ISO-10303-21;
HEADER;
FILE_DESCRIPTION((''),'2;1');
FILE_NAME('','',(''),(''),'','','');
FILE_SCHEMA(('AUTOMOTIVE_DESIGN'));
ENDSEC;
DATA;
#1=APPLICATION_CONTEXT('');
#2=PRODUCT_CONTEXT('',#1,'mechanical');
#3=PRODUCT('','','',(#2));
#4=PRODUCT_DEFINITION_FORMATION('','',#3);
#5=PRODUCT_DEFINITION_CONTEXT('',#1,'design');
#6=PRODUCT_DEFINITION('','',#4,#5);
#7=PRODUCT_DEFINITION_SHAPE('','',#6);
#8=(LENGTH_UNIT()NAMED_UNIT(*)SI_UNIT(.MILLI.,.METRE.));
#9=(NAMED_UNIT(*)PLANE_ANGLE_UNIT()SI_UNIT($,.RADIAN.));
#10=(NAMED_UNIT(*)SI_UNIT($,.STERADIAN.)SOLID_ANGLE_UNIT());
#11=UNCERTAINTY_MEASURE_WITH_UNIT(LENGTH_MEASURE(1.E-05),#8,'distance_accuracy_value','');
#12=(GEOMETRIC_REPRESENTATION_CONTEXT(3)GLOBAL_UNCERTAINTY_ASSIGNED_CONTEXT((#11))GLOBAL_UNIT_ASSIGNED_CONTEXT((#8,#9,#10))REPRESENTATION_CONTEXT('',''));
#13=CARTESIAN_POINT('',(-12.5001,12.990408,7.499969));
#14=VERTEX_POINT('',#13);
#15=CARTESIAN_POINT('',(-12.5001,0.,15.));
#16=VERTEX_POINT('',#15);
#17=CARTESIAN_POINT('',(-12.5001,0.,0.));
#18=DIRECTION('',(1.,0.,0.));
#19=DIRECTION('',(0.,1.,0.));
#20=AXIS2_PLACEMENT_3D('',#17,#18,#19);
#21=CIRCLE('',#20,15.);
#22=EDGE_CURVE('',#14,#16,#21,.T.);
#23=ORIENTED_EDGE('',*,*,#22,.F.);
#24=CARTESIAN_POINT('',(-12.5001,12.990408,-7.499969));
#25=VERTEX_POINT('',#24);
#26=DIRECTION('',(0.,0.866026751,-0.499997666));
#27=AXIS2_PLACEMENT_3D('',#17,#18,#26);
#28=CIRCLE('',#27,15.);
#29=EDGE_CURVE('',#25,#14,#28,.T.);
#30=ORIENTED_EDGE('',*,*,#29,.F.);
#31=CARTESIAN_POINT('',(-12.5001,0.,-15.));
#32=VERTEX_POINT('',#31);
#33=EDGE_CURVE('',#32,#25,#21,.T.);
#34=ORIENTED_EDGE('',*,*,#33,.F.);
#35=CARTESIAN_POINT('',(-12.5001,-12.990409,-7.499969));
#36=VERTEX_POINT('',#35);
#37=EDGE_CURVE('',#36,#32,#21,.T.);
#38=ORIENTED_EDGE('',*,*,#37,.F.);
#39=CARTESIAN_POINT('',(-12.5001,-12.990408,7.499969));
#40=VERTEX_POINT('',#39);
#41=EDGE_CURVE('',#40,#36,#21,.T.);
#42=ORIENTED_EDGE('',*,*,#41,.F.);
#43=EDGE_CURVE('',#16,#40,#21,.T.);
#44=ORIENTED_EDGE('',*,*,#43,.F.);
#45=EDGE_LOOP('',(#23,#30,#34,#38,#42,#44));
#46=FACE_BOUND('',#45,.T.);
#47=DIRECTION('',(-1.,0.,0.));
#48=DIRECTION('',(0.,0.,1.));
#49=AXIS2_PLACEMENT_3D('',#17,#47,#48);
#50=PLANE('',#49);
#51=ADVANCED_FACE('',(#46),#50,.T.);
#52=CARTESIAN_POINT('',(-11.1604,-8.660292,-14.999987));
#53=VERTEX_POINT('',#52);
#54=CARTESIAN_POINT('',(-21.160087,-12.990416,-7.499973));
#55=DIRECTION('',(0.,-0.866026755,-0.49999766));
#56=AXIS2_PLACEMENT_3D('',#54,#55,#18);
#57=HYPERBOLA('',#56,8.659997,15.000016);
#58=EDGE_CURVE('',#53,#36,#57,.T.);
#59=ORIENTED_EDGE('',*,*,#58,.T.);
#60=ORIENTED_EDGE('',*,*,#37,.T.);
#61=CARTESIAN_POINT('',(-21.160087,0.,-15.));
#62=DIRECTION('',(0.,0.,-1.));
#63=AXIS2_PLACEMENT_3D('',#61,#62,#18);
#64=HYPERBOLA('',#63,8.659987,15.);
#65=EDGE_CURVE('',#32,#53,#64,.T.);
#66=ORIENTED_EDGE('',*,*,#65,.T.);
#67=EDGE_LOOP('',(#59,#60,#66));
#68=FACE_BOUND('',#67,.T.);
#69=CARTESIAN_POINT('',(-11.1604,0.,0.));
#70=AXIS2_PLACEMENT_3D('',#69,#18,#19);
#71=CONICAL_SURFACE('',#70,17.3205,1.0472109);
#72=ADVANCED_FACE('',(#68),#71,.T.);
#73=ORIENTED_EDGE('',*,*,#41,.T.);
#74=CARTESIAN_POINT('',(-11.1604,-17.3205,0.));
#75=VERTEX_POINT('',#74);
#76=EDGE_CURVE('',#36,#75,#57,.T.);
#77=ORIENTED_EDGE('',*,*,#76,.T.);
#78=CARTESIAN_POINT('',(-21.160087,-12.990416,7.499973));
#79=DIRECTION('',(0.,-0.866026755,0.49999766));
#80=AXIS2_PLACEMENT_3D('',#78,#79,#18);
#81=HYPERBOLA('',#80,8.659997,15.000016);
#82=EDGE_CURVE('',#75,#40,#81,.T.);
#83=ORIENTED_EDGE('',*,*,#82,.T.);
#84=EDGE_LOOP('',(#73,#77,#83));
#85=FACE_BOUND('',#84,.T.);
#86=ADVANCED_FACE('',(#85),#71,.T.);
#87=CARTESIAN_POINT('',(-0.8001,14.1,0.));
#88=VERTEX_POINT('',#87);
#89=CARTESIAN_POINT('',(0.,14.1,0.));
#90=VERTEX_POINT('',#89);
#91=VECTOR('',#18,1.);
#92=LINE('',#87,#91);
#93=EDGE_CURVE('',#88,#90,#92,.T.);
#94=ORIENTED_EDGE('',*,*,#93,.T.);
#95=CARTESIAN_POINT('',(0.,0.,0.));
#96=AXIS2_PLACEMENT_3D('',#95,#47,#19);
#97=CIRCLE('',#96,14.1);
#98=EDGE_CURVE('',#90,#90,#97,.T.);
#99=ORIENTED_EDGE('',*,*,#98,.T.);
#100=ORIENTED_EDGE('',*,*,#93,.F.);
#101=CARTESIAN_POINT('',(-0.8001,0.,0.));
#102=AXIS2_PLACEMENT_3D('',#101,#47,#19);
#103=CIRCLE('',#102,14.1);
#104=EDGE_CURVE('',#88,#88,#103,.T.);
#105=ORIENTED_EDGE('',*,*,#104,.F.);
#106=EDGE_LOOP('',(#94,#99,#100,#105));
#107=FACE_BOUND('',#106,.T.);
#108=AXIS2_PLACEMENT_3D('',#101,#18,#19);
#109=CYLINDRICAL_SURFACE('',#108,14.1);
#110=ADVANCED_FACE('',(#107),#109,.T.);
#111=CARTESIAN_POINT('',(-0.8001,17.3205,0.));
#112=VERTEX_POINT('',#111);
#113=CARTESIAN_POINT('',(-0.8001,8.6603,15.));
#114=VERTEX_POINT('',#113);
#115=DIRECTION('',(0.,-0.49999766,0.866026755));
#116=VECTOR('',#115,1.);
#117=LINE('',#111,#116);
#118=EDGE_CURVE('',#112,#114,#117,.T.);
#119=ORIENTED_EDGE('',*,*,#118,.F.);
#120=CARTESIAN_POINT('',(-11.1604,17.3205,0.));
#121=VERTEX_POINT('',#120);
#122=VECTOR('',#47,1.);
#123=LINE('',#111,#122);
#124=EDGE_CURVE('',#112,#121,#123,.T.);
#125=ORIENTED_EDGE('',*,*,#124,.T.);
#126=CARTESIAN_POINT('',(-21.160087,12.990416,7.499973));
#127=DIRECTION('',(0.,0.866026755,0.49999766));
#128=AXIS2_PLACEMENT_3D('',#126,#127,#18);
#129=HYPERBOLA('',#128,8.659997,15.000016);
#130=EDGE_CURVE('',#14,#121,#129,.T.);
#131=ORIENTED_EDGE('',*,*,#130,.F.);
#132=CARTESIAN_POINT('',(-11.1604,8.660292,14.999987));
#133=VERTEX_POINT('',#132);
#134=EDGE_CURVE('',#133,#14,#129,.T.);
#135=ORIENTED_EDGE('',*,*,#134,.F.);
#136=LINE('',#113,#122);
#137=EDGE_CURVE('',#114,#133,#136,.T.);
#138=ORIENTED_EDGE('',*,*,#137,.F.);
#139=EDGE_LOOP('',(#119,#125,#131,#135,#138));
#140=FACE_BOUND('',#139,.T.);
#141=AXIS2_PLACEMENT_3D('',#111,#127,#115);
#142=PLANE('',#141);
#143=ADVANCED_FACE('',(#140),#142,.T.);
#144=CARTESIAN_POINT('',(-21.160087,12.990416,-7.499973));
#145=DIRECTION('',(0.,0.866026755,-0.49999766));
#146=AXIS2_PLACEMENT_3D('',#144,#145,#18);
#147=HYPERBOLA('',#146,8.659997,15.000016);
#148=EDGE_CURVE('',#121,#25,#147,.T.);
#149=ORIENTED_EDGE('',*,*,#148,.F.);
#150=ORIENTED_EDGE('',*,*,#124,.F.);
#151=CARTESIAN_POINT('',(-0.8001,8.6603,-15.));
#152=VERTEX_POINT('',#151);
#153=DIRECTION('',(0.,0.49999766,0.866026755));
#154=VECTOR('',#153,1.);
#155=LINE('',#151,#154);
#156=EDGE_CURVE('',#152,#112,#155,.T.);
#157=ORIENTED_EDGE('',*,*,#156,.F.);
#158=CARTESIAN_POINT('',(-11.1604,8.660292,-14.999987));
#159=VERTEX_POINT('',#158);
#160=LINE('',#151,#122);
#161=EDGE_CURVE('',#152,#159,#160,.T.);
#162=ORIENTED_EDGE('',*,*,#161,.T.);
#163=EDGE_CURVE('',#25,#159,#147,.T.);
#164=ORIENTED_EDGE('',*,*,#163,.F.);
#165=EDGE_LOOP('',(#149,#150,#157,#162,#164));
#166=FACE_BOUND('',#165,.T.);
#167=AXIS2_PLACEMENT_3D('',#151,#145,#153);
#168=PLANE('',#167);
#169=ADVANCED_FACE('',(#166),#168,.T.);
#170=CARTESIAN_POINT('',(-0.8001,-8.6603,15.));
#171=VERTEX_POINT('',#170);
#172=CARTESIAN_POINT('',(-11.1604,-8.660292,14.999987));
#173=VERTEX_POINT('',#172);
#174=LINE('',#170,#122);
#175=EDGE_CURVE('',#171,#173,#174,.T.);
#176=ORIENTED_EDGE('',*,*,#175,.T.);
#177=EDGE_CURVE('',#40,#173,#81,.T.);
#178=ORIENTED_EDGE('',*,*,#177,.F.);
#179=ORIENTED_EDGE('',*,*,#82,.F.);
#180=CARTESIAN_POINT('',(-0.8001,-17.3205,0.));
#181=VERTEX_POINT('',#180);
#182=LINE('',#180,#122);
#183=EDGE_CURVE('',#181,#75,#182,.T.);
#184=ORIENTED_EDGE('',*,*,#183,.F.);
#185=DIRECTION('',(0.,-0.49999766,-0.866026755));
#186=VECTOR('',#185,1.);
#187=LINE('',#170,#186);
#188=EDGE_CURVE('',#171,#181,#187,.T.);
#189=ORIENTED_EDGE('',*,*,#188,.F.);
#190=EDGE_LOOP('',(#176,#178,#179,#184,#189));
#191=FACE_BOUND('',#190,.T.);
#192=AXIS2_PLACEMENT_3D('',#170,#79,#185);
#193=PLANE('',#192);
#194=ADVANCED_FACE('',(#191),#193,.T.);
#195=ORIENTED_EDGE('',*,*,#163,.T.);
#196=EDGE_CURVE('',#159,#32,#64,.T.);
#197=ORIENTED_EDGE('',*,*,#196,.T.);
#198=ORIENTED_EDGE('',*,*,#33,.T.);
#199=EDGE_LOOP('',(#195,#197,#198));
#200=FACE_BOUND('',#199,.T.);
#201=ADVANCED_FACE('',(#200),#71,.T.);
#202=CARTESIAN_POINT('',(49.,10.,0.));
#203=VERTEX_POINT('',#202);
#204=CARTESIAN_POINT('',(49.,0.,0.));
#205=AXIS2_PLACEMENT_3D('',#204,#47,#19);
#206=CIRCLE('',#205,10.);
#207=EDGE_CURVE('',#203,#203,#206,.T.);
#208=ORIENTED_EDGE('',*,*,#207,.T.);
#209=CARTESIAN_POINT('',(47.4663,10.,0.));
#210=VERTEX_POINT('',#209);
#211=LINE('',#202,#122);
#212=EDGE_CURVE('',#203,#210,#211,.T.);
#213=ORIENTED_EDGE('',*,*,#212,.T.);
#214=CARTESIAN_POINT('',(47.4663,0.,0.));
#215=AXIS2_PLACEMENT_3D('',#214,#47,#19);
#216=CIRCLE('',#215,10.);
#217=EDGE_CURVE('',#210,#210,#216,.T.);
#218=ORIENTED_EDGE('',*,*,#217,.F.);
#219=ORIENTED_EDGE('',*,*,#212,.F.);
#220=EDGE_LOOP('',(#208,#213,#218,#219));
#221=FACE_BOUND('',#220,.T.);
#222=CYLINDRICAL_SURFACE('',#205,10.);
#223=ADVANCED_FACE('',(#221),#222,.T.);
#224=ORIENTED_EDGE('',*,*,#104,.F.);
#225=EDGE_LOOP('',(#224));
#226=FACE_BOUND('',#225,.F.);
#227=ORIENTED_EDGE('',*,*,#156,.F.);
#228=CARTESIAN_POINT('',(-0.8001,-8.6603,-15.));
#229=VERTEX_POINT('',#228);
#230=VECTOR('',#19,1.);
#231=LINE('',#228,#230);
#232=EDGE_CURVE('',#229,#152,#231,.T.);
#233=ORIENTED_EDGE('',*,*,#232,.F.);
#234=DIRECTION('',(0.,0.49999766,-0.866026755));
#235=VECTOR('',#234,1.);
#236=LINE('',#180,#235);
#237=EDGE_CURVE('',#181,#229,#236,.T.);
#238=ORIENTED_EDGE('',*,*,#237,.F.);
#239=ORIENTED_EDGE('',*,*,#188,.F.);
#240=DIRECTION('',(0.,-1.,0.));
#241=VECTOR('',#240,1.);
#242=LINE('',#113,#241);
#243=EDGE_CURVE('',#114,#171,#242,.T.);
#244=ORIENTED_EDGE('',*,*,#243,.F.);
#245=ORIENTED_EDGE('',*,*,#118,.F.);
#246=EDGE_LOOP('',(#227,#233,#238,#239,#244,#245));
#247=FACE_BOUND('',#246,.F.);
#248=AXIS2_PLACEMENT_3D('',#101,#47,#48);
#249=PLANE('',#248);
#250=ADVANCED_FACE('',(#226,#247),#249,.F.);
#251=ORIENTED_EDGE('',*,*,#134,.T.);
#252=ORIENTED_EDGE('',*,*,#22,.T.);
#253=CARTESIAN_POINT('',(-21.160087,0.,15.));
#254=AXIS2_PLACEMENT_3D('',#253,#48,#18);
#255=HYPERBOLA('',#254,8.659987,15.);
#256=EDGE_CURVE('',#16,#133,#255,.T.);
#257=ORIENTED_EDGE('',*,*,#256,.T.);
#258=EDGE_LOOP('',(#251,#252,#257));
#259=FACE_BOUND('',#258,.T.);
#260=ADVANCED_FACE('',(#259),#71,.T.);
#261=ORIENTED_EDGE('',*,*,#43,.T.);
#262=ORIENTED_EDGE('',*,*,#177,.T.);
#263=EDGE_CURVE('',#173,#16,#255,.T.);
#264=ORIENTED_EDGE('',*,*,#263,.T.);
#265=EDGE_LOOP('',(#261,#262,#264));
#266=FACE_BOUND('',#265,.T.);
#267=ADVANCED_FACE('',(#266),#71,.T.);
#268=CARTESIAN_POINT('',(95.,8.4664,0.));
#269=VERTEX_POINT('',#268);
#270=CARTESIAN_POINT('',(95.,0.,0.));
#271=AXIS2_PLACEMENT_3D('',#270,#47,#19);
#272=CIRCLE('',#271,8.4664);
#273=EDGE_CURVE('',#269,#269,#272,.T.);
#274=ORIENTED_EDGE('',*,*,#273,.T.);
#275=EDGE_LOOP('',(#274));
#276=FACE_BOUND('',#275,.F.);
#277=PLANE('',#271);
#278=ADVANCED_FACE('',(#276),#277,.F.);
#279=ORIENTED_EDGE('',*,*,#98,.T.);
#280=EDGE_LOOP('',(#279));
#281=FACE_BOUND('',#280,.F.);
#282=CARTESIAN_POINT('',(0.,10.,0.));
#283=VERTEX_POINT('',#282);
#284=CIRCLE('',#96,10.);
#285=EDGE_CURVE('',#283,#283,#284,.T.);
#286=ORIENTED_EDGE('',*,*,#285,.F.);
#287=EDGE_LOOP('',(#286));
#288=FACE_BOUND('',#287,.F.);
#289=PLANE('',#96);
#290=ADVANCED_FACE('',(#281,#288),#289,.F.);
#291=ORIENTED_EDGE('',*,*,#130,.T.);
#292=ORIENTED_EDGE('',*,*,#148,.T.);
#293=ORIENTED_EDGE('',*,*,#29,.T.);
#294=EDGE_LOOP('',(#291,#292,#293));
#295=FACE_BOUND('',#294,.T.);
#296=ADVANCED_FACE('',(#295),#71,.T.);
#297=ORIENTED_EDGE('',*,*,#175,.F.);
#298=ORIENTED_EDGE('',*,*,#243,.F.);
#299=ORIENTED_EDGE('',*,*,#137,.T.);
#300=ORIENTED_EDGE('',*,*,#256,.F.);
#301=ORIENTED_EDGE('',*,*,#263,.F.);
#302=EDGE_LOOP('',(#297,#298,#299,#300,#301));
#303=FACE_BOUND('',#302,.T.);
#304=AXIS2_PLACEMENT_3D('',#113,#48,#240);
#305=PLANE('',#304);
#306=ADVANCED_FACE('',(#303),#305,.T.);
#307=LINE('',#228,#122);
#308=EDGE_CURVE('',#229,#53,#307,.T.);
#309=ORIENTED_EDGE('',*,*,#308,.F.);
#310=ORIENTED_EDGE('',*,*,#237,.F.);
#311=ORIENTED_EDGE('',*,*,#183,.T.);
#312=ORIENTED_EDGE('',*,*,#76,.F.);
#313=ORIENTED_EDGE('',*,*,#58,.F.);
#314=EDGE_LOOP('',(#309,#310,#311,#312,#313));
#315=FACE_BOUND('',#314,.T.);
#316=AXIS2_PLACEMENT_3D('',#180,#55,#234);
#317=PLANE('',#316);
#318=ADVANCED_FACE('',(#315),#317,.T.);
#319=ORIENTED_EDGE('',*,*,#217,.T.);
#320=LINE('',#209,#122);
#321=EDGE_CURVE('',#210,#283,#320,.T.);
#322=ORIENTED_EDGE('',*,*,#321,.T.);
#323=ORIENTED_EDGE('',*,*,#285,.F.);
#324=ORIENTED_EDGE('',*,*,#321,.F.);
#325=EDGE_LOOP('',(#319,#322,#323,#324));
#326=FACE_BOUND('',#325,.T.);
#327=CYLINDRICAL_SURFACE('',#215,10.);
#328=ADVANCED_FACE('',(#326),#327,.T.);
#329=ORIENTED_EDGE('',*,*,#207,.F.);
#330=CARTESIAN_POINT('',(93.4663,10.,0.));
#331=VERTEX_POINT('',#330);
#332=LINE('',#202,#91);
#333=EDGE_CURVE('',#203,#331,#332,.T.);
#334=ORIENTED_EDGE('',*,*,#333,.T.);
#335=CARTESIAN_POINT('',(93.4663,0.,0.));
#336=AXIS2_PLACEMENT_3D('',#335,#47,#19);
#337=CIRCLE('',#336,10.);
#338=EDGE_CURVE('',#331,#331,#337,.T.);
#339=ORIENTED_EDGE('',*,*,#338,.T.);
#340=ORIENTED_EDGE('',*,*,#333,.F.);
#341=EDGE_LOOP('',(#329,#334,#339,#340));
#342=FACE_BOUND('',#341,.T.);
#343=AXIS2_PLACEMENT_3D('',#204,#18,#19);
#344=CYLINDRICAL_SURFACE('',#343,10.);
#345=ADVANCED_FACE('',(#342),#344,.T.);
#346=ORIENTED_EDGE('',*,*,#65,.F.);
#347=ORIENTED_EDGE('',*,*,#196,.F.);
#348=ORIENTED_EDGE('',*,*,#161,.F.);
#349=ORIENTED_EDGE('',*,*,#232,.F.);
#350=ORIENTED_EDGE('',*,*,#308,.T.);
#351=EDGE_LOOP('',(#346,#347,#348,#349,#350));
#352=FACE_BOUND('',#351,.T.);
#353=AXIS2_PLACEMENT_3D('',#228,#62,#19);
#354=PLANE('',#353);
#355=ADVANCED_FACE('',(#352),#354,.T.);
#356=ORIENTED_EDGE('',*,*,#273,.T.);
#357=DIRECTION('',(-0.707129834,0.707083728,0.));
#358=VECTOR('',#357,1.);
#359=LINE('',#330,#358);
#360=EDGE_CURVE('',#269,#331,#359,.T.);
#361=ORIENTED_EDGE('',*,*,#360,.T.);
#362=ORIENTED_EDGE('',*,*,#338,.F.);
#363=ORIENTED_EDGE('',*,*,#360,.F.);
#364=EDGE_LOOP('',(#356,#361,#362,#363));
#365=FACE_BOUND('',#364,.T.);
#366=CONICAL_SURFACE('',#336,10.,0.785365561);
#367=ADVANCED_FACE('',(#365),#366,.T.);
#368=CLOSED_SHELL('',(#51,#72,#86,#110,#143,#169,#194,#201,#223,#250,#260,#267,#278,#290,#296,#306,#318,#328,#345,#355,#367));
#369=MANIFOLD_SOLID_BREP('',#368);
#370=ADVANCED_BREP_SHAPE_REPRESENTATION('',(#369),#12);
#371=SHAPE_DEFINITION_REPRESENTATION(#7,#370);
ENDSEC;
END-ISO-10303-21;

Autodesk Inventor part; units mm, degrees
ref_plane "YZ Plane" through (0, 0, 0) normal (1, 0, 0) x (0, 1, 0)
ref_plane "XZ Plane" through (0, 0, 0) normal (0, 1, 0) x (-1, 0, 0)
sketch "Sketch1" plane through (0, 0, 0) normal (0, 0, 1) x (1, 0, 0)
  line L0 (0, 14.1) -> (0, 10)
  line L1 (49, 10) -> (95, 10)
  line L2 (95, 10) -> (95, 0)
  line L3 (95, 0) -> (-0.8001, 0)
  line L4 (-19.9601, 0) -> (114.16, 0) projected
  line L5 (-0.8001, 0) -> (-0.8001, 14.1)
  line L6 (-0.8001, 14.1) -> (0, 14.1)
  line L7 (49, 10) -> (47.4663, 10)
  line L8 (47.4663, 10) -> (0, 10)
  line L9 (0, -2.82) -> (0, 16.92) projected
  dimension "d0" = 95
  dimension "d1" = 46
  dimension "d2" = 20
  dimension "d9" = 0.8001
  dimension "d10" = 28.2
  dimension "d13" = 1.5337
  dimension "d14" = 20
revolve "Body" add sketch "Sketch1" angle 360 about axis through (95, 0, 0) along (-1, 0, 0)
sketch "Sketch2" plane through (-0.8001, 0, 0) normal (-1, 0, 0) x (0, 0, 1)
  line L0 (0, 17.3205) -> (15, 8.6603)
  line L1 (15, 8.6603) -> (15, -8.6603)
  line L2 (15, -8.6603) -> (0, -17.3205)
  line L3 (0, -17.3205) -> (-15, -8.6603)
  line L4 (-15, -8.6603) -> (-15, 8.6603)
  line L5 (-15, 8.6603) -> (0, 17.3205)
  point P0 (0, 0)
  point P1 (0, 0)
  dimension "d11" = 30
extrude "Head" add sketch "Sketch2" along normal blind 11.7
sketch "Sketch4" plane through (0, 0, 0) normal (0, 0, 1) x (1, 0, 0)
  line L0 (-12.5001, 15) -> (-12.5001, 17.3205)
  line L1 (-12.5001, 17.3205) -> (-11.1604, 17.3205)
  line L2 (-11.1604, 17.3205) -> (-12.5001, 15)
  line L3 (-14.8401, 0) -> (1.5399, 0) projected
  line L4 (-0.8001, 17.3205) -> (-12.5001, 17.3205) projected
  line L5 (-12.5001, 8.6603) -> (-12.5001, 17.3205) projected
  dimension "d5" = 30
  dimension "d19" = 30
revolve "Chamfer1" cut sketch "Sketch4" angle 360 about axis through (-10, 0, 0) along (1, 0, 0)
thread "Thread" size "M20x2.5" class "6g" standard "ISO Metric profile" length 46
chamfer "Chamfer2" distance 1.5336 distance2 1.5337 1 edges at (95, -10, 0) measured on face at (95, -2.495, 2.2104)
ref_plane "Work Plane1" through (1.525, 0, 0) normal (0, 0, 1) x (1, 0, 0)
equation "\"d0\" = NLG"
equation "\"d1\" = GEL"
equation "\"d2\" = GD"
equation "\"d10\" = SD2"
equation "\"d14\" = BDM"
equation "\"d11\" = SW"
equation "\"d3\" = KOH - SD"
equation "\"d5\" = ANG1"
equation "\"d19\" = SW0"
equation "\"d15\" = GEL"
equation "\"d6\" = -0.5 * SPD + 0.5 * GD"
equation "\"NLG\" = 95"
equation "\"GD\" = NND"
equation "\"BDM\" = NND"
equation "\"KOH\" = 12.5"
equation "\"GEL\" = 46"
equation "\"SW\" = 30"
equation "\"SW0\" = SW"
equation "\"SPD\" = NND - 1.2269 * PTC"
equation "\"SD2\" = 28.2"
equation "\"SD\" = 0.8"
equation "\"ANG1\" = 30deg"
equation "\"GAL\" = 0.61345 * PTC"
equation "\"GUL\" = 0.61345 * PTC"
equation "\"RR\" = 0.8"
equation "\"WFT\" = SD"
equation "\"GD1\" = THREADDIA - 1.2269 * PTC"
equation "\"SDH\" = 28.2"
equation "\"TOA\" = 30deg"
equation "\"FAWI\" = 45deg"
equation "\"PTC\" = 2.5"
equation "\"E0\" = 1.155 * SW"
equation "\"NND\" = 20"
equation "\"THREADDIA\" = 20"
properties part number "Bolt M20x95-8.8-A PN-85/M-82101" material "Steel, Mild"
